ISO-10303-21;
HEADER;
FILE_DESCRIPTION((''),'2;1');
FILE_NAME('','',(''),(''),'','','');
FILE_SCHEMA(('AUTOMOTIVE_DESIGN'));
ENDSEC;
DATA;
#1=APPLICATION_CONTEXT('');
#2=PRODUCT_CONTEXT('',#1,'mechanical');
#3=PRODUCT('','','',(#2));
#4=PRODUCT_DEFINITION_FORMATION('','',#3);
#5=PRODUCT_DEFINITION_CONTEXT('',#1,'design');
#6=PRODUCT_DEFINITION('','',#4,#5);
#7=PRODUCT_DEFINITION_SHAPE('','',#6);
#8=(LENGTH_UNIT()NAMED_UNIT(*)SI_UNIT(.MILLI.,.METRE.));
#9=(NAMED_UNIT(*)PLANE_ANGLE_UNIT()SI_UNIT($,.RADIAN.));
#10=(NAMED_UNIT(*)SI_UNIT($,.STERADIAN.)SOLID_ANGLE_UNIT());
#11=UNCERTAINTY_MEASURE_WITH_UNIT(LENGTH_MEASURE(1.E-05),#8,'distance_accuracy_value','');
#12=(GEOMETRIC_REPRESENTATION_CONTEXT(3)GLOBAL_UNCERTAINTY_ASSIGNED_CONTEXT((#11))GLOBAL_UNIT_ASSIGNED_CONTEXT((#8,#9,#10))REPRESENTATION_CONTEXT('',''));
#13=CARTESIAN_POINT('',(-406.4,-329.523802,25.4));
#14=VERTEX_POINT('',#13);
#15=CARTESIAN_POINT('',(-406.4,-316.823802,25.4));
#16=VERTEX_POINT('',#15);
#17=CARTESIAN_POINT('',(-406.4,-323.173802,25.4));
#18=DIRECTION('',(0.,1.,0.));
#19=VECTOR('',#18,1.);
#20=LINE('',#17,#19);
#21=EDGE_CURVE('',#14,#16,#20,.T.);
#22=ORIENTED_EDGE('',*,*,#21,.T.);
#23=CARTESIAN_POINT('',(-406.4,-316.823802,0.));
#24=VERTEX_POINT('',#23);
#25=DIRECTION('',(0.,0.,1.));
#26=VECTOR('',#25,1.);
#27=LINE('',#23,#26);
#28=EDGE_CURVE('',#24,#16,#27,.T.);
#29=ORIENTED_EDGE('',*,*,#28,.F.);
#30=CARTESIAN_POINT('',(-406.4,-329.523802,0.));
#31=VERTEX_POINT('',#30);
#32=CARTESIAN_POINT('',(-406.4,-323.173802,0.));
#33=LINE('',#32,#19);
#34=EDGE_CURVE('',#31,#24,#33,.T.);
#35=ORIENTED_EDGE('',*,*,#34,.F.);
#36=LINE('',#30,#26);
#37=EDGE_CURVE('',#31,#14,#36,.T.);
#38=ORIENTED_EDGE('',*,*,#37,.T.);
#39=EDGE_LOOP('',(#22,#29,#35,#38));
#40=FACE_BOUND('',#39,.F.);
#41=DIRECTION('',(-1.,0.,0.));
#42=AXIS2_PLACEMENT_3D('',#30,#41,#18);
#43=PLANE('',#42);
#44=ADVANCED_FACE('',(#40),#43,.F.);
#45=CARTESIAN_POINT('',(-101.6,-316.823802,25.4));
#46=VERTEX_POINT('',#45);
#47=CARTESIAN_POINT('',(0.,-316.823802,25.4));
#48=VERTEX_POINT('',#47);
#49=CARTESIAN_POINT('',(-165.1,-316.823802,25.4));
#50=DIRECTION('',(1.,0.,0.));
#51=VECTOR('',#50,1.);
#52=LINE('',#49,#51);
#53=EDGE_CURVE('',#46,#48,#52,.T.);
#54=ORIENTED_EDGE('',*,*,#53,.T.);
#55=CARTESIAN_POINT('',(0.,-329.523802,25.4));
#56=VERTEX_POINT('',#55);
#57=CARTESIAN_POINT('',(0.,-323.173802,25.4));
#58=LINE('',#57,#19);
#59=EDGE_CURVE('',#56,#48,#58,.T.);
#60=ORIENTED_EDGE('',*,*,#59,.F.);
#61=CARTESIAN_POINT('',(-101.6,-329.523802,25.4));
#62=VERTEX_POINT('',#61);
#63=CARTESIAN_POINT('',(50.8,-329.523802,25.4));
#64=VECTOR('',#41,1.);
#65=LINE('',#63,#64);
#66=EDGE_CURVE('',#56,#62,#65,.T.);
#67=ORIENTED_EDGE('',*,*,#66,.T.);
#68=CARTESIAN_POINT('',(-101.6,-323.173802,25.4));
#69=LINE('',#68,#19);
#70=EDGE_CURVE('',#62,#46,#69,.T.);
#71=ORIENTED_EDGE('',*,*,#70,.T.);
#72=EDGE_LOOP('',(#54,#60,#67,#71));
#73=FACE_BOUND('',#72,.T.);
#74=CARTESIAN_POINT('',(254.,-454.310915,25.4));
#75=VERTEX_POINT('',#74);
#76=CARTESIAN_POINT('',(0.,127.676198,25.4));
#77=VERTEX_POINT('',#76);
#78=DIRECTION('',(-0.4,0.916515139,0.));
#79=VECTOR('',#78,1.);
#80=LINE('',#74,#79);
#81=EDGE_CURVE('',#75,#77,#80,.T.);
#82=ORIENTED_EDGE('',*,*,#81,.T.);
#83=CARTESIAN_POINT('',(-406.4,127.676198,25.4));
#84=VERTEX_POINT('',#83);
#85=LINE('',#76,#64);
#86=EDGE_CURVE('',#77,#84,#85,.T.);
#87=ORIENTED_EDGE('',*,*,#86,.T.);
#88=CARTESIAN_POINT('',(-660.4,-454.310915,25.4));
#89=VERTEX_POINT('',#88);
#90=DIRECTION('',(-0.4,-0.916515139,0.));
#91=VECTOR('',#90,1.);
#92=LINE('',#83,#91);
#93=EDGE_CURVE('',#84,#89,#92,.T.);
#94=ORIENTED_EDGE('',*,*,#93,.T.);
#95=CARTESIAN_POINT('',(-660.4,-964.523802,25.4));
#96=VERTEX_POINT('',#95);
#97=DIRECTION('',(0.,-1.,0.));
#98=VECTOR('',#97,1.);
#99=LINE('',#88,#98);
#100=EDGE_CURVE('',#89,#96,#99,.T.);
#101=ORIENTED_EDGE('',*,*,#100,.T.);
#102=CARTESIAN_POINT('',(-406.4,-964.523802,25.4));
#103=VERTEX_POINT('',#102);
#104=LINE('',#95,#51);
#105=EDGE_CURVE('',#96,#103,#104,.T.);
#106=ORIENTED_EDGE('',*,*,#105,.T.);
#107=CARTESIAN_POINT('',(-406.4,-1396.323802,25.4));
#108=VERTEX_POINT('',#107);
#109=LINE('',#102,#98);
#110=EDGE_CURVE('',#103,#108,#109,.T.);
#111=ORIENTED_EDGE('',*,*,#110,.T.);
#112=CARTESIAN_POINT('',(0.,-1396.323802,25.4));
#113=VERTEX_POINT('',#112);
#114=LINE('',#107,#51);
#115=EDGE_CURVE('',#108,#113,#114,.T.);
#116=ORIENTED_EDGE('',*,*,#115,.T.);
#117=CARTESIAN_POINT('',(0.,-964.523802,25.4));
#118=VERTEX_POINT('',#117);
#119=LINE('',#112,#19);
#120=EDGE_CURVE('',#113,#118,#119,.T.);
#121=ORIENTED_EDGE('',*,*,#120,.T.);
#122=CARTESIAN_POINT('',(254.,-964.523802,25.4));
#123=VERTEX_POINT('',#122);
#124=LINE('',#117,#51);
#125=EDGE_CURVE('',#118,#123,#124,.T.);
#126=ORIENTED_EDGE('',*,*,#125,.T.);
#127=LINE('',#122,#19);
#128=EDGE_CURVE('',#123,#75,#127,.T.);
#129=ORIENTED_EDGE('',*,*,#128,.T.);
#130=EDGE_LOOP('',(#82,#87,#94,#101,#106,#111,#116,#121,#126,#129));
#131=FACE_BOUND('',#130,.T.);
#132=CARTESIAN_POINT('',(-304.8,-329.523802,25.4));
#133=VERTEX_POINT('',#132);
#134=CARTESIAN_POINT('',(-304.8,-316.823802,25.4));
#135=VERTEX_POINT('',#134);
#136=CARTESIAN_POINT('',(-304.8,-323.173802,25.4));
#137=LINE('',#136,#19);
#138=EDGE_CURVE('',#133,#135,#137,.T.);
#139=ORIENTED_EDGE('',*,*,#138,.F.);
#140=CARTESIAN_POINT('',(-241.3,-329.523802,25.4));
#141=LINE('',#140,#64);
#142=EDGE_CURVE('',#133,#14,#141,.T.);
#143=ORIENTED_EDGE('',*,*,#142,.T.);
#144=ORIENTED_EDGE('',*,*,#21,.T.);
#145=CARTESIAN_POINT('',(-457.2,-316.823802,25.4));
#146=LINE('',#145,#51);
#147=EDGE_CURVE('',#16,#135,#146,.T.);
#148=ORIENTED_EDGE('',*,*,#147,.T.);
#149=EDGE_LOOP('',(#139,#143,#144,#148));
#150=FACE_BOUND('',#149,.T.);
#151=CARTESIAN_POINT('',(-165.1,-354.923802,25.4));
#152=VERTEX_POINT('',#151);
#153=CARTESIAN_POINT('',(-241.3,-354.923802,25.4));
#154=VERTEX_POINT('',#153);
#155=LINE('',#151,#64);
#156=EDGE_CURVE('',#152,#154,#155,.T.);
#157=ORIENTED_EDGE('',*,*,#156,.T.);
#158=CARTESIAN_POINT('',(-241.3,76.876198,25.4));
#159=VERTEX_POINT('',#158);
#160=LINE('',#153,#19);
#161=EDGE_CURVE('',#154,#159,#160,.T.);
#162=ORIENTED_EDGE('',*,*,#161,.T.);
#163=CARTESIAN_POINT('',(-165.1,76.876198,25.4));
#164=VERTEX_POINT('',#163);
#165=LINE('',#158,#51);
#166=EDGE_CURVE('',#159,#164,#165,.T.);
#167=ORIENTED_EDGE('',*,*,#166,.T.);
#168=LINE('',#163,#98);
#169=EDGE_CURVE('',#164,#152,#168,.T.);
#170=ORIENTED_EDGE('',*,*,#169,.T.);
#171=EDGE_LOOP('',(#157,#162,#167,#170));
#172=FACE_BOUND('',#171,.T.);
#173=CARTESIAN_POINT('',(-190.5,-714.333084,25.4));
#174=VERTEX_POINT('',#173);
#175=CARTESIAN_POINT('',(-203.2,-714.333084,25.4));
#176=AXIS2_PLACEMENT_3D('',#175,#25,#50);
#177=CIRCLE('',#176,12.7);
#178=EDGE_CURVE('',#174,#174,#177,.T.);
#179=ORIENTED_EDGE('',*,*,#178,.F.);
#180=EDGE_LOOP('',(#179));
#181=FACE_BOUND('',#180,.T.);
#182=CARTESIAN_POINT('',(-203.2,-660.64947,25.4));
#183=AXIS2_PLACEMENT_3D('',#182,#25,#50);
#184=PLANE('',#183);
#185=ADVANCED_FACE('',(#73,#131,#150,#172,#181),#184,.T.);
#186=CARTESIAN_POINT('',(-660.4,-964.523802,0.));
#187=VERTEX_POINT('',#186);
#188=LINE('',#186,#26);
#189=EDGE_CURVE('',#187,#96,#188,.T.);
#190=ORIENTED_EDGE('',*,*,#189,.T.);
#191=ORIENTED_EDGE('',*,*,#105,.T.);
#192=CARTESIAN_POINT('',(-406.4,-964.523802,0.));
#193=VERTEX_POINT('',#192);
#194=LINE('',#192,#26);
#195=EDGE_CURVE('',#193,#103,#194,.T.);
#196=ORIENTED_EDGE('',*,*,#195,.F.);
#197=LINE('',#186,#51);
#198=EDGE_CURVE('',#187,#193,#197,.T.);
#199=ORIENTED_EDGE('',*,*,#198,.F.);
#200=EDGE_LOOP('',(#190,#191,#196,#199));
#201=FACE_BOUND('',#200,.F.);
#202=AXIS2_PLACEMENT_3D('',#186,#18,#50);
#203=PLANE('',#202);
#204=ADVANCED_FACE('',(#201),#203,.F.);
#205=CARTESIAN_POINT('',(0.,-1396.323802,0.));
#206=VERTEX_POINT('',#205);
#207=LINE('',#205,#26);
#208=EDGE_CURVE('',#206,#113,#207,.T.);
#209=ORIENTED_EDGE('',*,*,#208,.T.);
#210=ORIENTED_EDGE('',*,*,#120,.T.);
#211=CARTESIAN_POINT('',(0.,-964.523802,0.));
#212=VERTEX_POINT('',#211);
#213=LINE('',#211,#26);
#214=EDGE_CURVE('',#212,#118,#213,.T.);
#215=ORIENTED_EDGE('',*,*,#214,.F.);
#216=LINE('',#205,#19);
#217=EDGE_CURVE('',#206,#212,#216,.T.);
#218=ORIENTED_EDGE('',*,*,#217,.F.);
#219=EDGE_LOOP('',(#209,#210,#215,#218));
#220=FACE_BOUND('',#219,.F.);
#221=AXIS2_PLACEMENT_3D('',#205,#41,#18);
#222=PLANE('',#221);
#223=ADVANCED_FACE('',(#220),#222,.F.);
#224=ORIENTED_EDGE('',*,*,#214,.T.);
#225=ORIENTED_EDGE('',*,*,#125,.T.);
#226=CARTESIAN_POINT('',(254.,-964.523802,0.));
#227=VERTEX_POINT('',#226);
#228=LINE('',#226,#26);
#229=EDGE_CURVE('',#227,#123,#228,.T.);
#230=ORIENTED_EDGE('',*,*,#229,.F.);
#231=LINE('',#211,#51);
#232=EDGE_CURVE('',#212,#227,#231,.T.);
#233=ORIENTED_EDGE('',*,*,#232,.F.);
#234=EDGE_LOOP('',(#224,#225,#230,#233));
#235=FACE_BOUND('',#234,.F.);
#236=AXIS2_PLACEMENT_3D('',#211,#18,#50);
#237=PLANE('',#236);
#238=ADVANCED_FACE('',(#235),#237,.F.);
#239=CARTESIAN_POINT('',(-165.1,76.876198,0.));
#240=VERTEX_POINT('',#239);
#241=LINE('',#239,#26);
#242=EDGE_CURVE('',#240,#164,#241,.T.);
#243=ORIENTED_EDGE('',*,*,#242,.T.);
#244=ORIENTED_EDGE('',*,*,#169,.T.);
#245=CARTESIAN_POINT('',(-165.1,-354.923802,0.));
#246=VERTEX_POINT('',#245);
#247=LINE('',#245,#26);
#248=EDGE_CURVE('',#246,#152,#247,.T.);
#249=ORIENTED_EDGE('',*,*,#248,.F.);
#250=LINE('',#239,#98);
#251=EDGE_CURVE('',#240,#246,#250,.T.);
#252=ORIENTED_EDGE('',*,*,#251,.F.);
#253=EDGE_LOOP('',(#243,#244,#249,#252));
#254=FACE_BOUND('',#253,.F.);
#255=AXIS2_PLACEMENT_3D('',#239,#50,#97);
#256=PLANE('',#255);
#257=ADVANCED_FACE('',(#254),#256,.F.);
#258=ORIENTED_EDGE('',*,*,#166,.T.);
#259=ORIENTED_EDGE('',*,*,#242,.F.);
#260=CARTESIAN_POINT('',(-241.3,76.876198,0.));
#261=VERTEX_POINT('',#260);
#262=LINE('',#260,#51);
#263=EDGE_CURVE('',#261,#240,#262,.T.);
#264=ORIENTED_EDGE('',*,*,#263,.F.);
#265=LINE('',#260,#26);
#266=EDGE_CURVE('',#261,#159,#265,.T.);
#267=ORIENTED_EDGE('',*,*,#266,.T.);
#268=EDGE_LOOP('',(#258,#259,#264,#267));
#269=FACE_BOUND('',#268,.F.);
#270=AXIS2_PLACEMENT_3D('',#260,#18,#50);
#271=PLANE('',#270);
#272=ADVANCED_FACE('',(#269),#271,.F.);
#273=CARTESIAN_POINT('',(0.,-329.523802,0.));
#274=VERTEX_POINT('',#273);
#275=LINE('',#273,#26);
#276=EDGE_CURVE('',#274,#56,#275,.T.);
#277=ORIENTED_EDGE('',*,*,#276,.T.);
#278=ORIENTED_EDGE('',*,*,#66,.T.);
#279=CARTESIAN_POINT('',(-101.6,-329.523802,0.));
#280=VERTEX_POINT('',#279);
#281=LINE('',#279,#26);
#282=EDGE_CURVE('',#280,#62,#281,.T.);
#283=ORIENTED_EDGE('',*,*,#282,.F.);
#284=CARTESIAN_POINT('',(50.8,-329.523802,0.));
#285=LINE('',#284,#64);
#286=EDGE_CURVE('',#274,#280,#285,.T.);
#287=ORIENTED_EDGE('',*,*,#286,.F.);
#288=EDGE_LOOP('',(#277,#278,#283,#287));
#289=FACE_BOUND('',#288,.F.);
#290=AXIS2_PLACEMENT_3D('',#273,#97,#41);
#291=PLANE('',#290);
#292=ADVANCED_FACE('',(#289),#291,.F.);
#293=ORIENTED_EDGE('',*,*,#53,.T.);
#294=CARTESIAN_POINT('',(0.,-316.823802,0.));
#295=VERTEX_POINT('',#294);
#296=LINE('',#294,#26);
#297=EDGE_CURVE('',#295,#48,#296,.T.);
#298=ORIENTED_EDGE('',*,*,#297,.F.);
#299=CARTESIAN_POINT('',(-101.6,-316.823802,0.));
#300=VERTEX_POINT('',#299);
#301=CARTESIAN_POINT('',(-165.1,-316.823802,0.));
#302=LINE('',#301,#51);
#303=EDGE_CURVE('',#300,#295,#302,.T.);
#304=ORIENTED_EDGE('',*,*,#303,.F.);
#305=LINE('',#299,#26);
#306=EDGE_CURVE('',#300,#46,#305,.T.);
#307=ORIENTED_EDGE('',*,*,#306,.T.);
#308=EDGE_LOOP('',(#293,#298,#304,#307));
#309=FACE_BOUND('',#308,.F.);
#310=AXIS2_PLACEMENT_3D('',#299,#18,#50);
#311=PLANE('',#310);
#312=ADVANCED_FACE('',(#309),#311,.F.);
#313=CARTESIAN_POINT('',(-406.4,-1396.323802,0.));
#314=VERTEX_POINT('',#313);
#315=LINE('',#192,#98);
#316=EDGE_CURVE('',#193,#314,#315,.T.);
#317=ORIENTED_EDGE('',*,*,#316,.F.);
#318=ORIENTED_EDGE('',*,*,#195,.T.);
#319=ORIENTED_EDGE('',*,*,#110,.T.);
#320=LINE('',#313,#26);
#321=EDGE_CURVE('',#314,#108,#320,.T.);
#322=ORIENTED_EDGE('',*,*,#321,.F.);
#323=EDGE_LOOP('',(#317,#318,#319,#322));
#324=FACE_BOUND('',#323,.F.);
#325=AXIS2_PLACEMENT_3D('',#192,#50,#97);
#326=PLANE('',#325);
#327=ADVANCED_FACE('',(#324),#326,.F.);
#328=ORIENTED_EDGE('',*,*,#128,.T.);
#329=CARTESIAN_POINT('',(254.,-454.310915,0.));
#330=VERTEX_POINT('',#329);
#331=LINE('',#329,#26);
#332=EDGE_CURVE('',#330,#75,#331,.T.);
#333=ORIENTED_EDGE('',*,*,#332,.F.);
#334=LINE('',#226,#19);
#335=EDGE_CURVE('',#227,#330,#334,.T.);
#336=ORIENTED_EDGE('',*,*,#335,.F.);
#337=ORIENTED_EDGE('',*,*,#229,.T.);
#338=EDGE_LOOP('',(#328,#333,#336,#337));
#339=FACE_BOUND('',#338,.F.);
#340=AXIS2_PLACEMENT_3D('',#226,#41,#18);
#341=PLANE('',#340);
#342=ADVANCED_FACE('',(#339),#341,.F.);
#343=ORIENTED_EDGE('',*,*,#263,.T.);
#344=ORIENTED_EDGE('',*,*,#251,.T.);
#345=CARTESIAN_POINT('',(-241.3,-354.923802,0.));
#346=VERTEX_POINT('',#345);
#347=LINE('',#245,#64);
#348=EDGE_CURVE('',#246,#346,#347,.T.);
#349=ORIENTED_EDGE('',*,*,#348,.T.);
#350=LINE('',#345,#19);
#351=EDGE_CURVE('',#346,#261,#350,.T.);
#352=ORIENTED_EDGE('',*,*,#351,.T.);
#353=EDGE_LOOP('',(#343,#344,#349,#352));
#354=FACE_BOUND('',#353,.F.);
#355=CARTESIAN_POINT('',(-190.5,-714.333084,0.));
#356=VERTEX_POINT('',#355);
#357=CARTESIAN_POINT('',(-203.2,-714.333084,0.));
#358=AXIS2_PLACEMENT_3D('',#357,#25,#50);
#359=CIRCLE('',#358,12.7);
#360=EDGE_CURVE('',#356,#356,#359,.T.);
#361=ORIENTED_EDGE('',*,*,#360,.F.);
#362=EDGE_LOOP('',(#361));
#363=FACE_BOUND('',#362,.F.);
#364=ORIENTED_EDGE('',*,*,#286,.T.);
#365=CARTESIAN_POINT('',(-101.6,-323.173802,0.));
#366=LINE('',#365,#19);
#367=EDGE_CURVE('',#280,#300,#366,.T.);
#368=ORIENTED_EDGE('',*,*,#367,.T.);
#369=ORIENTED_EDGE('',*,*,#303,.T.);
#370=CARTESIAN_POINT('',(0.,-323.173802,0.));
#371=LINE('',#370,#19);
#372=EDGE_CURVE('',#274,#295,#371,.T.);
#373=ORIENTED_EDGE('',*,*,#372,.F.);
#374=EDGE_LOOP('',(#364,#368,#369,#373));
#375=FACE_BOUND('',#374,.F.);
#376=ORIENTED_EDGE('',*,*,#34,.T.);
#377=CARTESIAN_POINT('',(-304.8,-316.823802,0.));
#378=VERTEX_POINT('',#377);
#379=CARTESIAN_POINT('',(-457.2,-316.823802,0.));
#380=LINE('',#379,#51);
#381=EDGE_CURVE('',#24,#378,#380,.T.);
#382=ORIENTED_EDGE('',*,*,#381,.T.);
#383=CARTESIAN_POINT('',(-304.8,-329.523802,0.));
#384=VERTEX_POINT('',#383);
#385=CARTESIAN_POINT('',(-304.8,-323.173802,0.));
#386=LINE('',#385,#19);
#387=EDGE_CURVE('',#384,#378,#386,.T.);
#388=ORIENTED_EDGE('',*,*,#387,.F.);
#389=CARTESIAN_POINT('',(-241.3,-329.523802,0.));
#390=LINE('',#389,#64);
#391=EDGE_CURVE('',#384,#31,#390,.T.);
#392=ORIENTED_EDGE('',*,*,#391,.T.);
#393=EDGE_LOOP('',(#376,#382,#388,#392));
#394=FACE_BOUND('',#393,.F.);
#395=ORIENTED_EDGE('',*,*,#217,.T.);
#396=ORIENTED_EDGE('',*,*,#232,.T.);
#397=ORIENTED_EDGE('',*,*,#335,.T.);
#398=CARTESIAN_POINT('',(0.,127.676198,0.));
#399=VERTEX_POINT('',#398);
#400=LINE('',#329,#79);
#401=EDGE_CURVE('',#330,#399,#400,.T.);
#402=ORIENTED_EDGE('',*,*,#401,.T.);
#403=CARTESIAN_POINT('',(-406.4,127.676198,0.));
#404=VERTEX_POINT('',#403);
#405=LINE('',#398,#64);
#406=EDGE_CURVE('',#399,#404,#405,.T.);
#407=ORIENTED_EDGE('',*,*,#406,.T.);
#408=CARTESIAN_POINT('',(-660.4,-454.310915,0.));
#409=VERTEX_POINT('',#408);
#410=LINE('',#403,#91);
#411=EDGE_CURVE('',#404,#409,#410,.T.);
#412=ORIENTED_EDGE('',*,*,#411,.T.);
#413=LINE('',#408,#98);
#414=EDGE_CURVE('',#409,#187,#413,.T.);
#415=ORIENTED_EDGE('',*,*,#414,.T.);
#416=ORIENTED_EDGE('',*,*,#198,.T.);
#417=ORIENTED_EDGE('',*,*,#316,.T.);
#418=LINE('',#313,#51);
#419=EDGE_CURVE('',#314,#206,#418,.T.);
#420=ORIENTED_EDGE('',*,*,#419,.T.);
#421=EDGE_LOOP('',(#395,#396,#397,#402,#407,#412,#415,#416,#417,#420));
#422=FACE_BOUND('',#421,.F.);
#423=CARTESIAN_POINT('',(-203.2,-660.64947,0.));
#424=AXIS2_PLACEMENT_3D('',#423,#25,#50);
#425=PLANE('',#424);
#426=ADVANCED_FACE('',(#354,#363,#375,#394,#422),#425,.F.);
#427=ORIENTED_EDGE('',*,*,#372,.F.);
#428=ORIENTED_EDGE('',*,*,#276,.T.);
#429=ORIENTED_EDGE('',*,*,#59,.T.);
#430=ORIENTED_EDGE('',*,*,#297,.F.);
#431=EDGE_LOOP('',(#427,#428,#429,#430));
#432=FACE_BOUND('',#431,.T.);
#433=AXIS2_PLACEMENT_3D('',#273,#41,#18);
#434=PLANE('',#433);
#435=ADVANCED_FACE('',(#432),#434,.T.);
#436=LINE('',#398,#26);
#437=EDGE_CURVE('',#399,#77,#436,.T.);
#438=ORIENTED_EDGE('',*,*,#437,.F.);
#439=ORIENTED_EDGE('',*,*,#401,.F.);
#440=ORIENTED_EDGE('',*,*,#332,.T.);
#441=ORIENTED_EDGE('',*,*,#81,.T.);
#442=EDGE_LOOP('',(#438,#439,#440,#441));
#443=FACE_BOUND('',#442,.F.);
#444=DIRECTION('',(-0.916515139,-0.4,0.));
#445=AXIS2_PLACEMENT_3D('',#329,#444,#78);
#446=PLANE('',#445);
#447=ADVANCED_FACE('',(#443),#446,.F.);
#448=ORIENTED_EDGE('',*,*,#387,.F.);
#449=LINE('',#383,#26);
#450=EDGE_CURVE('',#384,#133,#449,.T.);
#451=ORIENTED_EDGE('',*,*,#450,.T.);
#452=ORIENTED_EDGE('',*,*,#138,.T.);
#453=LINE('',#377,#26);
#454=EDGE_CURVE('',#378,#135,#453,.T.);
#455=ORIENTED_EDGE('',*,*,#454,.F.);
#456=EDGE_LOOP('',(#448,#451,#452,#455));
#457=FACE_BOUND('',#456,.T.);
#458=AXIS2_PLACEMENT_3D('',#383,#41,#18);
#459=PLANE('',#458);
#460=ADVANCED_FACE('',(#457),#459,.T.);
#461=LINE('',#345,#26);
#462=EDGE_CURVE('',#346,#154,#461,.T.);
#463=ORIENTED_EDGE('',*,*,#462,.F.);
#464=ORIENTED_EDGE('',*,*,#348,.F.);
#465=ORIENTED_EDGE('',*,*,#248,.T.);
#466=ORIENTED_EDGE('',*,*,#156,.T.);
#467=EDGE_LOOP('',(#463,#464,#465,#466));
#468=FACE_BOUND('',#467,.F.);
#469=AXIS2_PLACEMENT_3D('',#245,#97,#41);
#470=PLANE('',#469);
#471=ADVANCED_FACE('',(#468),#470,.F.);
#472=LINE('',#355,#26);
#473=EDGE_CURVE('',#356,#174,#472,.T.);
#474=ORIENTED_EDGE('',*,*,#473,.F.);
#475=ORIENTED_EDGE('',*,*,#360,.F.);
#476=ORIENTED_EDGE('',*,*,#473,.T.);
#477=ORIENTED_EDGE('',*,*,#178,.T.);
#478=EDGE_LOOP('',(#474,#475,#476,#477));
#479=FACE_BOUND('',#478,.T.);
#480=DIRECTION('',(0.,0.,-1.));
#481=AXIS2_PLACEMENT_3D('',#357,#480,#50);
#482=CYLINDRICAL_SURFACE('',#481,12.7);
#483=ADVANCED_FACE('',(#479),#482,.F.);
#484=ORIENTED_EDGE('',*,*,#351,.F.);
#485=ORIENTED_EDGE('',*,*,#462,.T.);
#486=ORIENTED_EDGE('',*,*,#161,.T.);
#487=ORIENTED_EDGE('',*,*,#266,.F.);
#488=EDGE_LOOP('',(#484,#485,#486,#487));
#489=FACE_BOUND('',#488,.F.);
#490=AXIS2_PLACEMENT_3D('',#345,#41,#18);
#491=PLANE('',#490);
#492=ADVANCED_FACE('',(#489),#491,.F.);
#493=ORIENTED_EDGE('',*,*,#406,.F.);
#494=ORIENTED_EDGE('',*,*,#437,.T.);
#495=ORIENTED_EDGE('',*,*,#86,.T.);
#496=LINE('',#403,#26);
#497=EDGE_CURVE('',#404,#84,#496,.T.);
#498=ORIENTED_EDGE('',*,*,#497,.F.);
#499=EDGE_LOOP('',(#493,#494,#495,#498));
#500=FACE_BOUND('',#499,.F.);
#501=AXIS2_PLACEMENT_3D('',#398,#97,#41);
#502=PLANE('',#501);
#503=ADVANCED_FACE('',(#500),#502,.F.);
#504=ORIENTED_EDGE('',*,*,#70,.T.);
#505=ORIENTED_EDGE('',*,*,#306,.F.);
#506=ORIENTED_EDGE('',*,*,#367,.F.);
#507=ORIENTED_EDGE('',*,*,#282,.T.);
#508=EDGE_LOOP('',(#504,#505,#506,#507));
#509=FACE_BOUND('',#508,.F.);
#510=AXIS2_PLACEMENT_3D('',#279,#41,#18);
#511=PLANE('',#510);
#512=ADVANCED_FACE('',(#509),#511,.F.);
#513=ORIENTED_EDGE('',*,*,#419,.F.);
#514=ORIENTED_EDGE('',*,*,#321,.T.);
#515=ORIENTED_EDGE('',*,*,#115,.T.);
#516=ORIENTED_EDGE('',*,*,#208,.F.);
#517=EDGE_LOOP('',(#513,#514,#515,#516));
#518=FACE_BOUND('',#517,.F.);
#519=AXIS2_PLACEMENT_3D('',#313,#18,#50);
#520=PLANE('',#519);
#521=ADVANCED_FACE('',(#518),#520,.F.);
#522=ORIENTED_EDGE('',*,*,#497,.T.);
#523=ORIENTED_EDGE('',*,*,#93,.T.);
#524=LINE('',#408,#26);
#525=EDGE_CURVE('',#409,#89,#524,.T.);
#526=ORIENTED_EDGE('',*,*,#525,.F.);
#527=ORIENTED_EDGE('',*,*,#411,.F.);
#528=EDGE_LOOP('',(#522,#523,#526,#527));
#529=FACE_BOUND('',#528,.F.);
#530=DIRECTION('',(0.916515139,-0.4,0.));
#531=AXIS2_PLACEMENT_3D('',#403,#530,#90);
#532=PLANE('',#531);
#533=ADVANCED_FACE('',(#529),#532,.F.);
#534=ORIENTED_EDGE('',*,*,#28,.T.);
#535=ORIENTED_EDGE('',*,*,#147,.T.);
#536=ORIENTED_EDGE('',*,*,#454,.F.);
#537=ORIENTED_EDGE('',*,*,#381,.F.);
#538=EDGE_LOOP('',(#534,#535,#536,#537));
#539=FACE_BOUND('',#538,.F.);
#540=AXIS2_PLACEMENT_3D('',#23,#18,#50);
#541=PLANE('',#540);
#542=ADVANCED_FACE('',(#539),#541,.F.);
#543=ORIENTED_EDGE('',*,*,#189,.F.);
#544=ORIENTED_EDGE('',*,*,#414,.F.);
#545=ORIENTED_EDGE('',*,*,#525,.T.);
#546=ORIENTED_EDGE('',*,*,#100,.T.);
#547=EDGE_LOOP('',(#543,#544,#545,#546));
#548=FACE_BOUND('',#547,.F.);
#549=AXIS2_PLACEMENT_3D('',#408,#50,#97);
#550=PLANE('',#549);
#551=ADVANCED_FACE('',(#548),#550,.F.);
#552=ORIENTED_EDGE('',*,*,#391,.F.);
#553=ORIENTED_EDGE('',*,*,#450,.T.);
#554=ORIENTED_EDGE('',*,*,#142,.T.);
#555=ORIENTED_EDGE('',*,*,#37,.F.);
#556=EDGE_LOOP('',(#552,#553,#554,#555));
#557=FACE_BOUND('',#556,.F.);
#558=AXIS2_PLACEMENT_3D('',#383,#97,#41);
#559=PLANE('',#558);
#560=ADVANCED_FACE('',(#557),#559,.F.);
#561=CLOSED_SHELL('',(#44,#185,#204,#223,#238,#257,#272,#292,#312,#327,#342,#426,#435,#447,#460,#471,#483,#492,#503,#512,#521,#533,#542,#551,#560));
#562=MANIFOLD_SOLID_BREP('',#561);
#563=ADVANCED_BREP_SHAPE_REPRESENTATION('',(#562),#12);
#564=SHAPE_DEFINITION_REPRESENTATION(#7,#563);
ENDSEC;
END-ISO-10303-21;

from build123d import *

# Parameters (mm, degrees)
F0_R     = 12.7
F0_W     = 50.8
F0_H     = 12.7
F0_W_2   = 63.5
F1_DEPTH = 25.4


# Not quite as in the source:
# - a feature names something its author has since deleted; it is built from what else it names


with BuildPart() as f1:
    # F0 (on Top) → F1 (new body)
    with BuildSketch(Plane.XY):
        Polygon((-406.4, -964.5238018036), (-406.4, -1396.3238018036), (0, -1396.3238018036), (0, -964.5238018036), (254, -964.5238018036), (254, -454.310915063), (0, 127.6761981964), (-406.4, 127.6761981964), (-660.4, -454.310915063), (-660.4, -964.5238018036), align=None)
        with Locations((-203.2, -714.3330844099)):
            Circle(F0_R, mode=Mode.SUBTRACT)
        Polygon((-241.3, -316.8238018036), (-241.3, 76.8761981964), (-165.1, 76.8761981964), (-165.1, -316.8238018036), (-101.6, -316.8238018036), (0, -316.8238018036), (50.8, -316.8238018036), (50.8, -329.5238018036), (0, -329.5238018036), (-101.6, -329.5238018036), (-165.1, -329.5238018036), (-165.1, -354.9238018036), (-241.3, -354.9238018036), (-241.3, -329.5238018036), (-304.8, -329.5238018036), (-406.4, -329.5238018036), (-457.2, -329.5238018036), (-457.2, -316.8238018036), (-406.4, -316.8238018036), (-304.8, -316.8238018036), align=None, mode=Mode.SUBTRACT)
        with Locations((-431.8, -323.1738018036)):
            Rectangle(F0_W, F0_H)
        with Locations((-133.35, -323.1738018036)):
            Rectangle(F0_W_2, F0_H)
        with Locations((25.4, -323.1738018036)):
            Rectangle(F0_W, F0_H)
        with Locations((-273.05, -323.1738018036)):
            Rectangle(F0_W_2, F0_H)
    extrude(amount=F1_DEPTH)


solid = f1.part
